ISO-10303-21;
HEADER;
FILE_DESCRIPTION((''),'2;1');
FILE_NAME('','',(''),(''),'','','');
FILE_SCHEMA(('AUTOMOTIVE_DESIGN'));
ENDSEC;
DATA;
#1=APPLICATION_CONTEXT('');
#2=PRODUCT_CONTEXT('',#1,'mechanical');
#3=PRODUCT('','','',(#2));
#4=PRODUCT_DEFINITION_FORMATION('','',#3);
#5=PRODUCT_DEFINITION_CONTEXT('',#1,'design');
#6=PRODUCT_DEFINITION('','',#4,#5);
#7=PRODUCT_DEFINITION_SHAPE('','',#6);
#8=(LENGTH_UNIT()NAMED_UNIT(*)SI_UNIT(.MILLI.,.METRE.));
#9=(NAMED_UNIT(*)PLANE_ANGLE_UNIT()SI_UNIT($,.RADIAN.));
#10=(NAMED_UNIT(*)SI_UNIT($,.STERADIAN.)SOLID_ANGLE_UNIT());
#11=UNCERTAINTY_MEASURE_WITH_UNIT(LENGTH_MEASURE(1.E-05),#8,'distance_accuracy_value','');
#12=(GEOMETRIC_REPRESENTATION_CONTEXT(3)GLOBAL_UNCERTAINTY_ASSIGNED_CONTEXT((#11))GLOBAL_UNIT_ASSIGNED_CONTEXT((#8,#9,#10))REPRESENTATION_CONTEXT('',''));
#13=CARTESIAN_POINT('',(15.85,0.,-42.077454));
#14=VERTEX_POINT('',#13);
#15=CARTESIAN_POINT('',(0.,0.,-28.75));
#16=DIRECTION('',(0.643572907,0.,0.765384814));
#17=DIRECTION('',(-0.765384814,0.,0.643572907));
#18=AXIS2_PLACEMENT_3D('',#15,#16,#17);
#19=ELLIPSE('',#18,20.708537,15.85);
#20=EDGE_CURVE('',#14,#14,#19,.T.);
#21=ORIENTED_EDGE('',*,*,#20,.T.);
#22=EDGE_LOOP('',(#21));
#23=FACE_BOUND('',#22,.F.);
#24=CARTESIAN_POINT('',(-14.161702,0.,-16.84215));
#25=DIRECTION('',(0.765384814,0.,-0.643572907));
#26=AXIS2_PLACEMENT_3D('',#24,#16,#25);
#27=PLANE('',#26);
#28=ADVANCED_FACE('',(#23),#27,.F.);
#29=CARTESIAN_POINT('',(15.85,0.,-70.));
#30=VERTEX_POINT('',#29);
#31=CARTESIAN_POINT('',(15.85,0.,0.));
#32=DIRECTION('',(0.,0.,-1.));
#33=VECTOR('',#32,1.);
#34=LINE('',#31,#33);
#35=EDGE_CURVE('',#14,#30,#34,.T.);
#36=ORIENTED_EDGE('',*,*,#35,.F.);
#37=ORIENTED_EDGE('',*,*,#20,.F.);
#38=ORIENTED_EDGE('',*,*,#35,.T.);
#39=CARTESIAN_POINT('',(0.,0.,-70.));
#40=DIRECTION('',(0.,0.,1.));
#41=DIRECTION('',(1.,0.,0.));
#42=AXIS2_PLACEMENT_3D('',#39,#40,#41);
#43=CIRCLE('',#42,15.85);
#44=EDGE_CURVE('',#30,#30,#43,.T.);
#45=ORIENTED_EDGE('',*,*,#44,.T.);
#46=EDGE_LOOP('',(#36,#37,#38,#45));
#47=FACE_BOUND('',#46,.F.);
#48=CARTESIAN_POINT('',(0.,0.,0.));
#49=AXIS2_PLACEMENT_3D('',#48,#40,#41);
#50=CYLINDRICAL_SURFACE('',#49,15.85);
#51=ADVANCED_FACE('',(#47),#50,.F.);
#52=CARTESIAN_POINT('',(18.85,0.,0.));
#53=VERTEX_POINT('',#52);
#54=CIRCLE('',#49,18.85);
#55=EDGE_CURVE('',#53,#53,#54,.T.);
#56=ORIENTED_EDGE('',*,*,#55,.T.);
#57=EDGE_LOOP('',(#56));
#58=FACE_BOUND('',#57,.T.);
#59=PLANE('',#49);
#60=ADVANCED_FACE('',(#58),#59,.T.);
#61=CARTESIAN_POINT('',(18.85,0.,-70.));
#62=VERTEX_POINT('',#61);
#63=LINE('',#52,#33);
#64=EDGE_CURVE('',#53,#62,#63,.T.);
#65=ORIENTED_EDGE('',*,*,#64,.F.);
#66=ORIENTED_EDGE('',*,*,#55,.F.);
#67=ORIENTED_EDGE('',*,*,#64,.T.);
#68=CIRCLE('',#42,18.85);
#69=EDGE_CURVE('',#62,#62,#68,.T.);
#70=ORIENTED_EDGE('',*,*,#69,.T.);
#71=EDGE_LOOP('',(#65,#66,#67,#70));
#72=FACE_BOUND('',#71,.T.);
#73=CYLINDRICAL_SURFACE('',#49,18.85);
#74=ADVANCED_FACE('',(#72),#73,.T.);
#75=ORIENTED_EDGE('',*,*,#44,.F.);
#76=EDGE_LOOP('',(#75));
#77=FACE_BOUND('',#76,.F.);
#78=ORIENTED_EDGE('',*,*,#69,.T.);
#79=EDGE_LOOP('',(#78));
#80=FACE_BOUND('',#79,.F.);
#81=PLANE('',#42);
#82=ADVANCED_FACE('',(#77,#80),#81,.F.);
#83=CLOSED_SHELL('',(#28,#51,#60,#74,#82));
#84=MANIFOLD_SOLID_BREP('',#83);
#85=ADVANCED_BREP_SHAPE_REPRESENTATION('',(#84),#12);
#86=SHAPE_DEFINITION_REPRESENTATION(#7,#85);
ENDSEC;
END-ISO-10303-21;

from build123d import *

# Parameters (mm, degrees)
F0_R     = 18.85
F0_R_2   = 15.85
F1_DEPTH = 70
F4_R     = 18.85
F5_REACH = 97.9158513015


with BuildPart() as f1:
    # F0 (on Top) → F1 (new body)
    with BuildSketch(Plane.XY):
        Circle(F0_R)
        Circle(F0_R_2, mode=Mode.SUBTRACT)
    extrude(amount=-F1_DEPTH)

    f5_end = Plane(origin=(-14.1617017286, 0, -16.8421500054), x_dir=(0.7653848138, 0, -0.6435729071), z_dir=(0.6435729071, 0, 0.7653848138))
    # F4 (on face) → F5 (join, up to a plane its end follows)
    with BuildSketch(Plane.XY):
        Circle(F4_R)
    f5_long = extrude(amount=-F5_REACH, mode=Mode.PRIVATE)
    add(split(f5_long, bisect_by=f5_end, keep=Keep.TOP, mode=Mode.PRIVATE))


solid = f1.part
